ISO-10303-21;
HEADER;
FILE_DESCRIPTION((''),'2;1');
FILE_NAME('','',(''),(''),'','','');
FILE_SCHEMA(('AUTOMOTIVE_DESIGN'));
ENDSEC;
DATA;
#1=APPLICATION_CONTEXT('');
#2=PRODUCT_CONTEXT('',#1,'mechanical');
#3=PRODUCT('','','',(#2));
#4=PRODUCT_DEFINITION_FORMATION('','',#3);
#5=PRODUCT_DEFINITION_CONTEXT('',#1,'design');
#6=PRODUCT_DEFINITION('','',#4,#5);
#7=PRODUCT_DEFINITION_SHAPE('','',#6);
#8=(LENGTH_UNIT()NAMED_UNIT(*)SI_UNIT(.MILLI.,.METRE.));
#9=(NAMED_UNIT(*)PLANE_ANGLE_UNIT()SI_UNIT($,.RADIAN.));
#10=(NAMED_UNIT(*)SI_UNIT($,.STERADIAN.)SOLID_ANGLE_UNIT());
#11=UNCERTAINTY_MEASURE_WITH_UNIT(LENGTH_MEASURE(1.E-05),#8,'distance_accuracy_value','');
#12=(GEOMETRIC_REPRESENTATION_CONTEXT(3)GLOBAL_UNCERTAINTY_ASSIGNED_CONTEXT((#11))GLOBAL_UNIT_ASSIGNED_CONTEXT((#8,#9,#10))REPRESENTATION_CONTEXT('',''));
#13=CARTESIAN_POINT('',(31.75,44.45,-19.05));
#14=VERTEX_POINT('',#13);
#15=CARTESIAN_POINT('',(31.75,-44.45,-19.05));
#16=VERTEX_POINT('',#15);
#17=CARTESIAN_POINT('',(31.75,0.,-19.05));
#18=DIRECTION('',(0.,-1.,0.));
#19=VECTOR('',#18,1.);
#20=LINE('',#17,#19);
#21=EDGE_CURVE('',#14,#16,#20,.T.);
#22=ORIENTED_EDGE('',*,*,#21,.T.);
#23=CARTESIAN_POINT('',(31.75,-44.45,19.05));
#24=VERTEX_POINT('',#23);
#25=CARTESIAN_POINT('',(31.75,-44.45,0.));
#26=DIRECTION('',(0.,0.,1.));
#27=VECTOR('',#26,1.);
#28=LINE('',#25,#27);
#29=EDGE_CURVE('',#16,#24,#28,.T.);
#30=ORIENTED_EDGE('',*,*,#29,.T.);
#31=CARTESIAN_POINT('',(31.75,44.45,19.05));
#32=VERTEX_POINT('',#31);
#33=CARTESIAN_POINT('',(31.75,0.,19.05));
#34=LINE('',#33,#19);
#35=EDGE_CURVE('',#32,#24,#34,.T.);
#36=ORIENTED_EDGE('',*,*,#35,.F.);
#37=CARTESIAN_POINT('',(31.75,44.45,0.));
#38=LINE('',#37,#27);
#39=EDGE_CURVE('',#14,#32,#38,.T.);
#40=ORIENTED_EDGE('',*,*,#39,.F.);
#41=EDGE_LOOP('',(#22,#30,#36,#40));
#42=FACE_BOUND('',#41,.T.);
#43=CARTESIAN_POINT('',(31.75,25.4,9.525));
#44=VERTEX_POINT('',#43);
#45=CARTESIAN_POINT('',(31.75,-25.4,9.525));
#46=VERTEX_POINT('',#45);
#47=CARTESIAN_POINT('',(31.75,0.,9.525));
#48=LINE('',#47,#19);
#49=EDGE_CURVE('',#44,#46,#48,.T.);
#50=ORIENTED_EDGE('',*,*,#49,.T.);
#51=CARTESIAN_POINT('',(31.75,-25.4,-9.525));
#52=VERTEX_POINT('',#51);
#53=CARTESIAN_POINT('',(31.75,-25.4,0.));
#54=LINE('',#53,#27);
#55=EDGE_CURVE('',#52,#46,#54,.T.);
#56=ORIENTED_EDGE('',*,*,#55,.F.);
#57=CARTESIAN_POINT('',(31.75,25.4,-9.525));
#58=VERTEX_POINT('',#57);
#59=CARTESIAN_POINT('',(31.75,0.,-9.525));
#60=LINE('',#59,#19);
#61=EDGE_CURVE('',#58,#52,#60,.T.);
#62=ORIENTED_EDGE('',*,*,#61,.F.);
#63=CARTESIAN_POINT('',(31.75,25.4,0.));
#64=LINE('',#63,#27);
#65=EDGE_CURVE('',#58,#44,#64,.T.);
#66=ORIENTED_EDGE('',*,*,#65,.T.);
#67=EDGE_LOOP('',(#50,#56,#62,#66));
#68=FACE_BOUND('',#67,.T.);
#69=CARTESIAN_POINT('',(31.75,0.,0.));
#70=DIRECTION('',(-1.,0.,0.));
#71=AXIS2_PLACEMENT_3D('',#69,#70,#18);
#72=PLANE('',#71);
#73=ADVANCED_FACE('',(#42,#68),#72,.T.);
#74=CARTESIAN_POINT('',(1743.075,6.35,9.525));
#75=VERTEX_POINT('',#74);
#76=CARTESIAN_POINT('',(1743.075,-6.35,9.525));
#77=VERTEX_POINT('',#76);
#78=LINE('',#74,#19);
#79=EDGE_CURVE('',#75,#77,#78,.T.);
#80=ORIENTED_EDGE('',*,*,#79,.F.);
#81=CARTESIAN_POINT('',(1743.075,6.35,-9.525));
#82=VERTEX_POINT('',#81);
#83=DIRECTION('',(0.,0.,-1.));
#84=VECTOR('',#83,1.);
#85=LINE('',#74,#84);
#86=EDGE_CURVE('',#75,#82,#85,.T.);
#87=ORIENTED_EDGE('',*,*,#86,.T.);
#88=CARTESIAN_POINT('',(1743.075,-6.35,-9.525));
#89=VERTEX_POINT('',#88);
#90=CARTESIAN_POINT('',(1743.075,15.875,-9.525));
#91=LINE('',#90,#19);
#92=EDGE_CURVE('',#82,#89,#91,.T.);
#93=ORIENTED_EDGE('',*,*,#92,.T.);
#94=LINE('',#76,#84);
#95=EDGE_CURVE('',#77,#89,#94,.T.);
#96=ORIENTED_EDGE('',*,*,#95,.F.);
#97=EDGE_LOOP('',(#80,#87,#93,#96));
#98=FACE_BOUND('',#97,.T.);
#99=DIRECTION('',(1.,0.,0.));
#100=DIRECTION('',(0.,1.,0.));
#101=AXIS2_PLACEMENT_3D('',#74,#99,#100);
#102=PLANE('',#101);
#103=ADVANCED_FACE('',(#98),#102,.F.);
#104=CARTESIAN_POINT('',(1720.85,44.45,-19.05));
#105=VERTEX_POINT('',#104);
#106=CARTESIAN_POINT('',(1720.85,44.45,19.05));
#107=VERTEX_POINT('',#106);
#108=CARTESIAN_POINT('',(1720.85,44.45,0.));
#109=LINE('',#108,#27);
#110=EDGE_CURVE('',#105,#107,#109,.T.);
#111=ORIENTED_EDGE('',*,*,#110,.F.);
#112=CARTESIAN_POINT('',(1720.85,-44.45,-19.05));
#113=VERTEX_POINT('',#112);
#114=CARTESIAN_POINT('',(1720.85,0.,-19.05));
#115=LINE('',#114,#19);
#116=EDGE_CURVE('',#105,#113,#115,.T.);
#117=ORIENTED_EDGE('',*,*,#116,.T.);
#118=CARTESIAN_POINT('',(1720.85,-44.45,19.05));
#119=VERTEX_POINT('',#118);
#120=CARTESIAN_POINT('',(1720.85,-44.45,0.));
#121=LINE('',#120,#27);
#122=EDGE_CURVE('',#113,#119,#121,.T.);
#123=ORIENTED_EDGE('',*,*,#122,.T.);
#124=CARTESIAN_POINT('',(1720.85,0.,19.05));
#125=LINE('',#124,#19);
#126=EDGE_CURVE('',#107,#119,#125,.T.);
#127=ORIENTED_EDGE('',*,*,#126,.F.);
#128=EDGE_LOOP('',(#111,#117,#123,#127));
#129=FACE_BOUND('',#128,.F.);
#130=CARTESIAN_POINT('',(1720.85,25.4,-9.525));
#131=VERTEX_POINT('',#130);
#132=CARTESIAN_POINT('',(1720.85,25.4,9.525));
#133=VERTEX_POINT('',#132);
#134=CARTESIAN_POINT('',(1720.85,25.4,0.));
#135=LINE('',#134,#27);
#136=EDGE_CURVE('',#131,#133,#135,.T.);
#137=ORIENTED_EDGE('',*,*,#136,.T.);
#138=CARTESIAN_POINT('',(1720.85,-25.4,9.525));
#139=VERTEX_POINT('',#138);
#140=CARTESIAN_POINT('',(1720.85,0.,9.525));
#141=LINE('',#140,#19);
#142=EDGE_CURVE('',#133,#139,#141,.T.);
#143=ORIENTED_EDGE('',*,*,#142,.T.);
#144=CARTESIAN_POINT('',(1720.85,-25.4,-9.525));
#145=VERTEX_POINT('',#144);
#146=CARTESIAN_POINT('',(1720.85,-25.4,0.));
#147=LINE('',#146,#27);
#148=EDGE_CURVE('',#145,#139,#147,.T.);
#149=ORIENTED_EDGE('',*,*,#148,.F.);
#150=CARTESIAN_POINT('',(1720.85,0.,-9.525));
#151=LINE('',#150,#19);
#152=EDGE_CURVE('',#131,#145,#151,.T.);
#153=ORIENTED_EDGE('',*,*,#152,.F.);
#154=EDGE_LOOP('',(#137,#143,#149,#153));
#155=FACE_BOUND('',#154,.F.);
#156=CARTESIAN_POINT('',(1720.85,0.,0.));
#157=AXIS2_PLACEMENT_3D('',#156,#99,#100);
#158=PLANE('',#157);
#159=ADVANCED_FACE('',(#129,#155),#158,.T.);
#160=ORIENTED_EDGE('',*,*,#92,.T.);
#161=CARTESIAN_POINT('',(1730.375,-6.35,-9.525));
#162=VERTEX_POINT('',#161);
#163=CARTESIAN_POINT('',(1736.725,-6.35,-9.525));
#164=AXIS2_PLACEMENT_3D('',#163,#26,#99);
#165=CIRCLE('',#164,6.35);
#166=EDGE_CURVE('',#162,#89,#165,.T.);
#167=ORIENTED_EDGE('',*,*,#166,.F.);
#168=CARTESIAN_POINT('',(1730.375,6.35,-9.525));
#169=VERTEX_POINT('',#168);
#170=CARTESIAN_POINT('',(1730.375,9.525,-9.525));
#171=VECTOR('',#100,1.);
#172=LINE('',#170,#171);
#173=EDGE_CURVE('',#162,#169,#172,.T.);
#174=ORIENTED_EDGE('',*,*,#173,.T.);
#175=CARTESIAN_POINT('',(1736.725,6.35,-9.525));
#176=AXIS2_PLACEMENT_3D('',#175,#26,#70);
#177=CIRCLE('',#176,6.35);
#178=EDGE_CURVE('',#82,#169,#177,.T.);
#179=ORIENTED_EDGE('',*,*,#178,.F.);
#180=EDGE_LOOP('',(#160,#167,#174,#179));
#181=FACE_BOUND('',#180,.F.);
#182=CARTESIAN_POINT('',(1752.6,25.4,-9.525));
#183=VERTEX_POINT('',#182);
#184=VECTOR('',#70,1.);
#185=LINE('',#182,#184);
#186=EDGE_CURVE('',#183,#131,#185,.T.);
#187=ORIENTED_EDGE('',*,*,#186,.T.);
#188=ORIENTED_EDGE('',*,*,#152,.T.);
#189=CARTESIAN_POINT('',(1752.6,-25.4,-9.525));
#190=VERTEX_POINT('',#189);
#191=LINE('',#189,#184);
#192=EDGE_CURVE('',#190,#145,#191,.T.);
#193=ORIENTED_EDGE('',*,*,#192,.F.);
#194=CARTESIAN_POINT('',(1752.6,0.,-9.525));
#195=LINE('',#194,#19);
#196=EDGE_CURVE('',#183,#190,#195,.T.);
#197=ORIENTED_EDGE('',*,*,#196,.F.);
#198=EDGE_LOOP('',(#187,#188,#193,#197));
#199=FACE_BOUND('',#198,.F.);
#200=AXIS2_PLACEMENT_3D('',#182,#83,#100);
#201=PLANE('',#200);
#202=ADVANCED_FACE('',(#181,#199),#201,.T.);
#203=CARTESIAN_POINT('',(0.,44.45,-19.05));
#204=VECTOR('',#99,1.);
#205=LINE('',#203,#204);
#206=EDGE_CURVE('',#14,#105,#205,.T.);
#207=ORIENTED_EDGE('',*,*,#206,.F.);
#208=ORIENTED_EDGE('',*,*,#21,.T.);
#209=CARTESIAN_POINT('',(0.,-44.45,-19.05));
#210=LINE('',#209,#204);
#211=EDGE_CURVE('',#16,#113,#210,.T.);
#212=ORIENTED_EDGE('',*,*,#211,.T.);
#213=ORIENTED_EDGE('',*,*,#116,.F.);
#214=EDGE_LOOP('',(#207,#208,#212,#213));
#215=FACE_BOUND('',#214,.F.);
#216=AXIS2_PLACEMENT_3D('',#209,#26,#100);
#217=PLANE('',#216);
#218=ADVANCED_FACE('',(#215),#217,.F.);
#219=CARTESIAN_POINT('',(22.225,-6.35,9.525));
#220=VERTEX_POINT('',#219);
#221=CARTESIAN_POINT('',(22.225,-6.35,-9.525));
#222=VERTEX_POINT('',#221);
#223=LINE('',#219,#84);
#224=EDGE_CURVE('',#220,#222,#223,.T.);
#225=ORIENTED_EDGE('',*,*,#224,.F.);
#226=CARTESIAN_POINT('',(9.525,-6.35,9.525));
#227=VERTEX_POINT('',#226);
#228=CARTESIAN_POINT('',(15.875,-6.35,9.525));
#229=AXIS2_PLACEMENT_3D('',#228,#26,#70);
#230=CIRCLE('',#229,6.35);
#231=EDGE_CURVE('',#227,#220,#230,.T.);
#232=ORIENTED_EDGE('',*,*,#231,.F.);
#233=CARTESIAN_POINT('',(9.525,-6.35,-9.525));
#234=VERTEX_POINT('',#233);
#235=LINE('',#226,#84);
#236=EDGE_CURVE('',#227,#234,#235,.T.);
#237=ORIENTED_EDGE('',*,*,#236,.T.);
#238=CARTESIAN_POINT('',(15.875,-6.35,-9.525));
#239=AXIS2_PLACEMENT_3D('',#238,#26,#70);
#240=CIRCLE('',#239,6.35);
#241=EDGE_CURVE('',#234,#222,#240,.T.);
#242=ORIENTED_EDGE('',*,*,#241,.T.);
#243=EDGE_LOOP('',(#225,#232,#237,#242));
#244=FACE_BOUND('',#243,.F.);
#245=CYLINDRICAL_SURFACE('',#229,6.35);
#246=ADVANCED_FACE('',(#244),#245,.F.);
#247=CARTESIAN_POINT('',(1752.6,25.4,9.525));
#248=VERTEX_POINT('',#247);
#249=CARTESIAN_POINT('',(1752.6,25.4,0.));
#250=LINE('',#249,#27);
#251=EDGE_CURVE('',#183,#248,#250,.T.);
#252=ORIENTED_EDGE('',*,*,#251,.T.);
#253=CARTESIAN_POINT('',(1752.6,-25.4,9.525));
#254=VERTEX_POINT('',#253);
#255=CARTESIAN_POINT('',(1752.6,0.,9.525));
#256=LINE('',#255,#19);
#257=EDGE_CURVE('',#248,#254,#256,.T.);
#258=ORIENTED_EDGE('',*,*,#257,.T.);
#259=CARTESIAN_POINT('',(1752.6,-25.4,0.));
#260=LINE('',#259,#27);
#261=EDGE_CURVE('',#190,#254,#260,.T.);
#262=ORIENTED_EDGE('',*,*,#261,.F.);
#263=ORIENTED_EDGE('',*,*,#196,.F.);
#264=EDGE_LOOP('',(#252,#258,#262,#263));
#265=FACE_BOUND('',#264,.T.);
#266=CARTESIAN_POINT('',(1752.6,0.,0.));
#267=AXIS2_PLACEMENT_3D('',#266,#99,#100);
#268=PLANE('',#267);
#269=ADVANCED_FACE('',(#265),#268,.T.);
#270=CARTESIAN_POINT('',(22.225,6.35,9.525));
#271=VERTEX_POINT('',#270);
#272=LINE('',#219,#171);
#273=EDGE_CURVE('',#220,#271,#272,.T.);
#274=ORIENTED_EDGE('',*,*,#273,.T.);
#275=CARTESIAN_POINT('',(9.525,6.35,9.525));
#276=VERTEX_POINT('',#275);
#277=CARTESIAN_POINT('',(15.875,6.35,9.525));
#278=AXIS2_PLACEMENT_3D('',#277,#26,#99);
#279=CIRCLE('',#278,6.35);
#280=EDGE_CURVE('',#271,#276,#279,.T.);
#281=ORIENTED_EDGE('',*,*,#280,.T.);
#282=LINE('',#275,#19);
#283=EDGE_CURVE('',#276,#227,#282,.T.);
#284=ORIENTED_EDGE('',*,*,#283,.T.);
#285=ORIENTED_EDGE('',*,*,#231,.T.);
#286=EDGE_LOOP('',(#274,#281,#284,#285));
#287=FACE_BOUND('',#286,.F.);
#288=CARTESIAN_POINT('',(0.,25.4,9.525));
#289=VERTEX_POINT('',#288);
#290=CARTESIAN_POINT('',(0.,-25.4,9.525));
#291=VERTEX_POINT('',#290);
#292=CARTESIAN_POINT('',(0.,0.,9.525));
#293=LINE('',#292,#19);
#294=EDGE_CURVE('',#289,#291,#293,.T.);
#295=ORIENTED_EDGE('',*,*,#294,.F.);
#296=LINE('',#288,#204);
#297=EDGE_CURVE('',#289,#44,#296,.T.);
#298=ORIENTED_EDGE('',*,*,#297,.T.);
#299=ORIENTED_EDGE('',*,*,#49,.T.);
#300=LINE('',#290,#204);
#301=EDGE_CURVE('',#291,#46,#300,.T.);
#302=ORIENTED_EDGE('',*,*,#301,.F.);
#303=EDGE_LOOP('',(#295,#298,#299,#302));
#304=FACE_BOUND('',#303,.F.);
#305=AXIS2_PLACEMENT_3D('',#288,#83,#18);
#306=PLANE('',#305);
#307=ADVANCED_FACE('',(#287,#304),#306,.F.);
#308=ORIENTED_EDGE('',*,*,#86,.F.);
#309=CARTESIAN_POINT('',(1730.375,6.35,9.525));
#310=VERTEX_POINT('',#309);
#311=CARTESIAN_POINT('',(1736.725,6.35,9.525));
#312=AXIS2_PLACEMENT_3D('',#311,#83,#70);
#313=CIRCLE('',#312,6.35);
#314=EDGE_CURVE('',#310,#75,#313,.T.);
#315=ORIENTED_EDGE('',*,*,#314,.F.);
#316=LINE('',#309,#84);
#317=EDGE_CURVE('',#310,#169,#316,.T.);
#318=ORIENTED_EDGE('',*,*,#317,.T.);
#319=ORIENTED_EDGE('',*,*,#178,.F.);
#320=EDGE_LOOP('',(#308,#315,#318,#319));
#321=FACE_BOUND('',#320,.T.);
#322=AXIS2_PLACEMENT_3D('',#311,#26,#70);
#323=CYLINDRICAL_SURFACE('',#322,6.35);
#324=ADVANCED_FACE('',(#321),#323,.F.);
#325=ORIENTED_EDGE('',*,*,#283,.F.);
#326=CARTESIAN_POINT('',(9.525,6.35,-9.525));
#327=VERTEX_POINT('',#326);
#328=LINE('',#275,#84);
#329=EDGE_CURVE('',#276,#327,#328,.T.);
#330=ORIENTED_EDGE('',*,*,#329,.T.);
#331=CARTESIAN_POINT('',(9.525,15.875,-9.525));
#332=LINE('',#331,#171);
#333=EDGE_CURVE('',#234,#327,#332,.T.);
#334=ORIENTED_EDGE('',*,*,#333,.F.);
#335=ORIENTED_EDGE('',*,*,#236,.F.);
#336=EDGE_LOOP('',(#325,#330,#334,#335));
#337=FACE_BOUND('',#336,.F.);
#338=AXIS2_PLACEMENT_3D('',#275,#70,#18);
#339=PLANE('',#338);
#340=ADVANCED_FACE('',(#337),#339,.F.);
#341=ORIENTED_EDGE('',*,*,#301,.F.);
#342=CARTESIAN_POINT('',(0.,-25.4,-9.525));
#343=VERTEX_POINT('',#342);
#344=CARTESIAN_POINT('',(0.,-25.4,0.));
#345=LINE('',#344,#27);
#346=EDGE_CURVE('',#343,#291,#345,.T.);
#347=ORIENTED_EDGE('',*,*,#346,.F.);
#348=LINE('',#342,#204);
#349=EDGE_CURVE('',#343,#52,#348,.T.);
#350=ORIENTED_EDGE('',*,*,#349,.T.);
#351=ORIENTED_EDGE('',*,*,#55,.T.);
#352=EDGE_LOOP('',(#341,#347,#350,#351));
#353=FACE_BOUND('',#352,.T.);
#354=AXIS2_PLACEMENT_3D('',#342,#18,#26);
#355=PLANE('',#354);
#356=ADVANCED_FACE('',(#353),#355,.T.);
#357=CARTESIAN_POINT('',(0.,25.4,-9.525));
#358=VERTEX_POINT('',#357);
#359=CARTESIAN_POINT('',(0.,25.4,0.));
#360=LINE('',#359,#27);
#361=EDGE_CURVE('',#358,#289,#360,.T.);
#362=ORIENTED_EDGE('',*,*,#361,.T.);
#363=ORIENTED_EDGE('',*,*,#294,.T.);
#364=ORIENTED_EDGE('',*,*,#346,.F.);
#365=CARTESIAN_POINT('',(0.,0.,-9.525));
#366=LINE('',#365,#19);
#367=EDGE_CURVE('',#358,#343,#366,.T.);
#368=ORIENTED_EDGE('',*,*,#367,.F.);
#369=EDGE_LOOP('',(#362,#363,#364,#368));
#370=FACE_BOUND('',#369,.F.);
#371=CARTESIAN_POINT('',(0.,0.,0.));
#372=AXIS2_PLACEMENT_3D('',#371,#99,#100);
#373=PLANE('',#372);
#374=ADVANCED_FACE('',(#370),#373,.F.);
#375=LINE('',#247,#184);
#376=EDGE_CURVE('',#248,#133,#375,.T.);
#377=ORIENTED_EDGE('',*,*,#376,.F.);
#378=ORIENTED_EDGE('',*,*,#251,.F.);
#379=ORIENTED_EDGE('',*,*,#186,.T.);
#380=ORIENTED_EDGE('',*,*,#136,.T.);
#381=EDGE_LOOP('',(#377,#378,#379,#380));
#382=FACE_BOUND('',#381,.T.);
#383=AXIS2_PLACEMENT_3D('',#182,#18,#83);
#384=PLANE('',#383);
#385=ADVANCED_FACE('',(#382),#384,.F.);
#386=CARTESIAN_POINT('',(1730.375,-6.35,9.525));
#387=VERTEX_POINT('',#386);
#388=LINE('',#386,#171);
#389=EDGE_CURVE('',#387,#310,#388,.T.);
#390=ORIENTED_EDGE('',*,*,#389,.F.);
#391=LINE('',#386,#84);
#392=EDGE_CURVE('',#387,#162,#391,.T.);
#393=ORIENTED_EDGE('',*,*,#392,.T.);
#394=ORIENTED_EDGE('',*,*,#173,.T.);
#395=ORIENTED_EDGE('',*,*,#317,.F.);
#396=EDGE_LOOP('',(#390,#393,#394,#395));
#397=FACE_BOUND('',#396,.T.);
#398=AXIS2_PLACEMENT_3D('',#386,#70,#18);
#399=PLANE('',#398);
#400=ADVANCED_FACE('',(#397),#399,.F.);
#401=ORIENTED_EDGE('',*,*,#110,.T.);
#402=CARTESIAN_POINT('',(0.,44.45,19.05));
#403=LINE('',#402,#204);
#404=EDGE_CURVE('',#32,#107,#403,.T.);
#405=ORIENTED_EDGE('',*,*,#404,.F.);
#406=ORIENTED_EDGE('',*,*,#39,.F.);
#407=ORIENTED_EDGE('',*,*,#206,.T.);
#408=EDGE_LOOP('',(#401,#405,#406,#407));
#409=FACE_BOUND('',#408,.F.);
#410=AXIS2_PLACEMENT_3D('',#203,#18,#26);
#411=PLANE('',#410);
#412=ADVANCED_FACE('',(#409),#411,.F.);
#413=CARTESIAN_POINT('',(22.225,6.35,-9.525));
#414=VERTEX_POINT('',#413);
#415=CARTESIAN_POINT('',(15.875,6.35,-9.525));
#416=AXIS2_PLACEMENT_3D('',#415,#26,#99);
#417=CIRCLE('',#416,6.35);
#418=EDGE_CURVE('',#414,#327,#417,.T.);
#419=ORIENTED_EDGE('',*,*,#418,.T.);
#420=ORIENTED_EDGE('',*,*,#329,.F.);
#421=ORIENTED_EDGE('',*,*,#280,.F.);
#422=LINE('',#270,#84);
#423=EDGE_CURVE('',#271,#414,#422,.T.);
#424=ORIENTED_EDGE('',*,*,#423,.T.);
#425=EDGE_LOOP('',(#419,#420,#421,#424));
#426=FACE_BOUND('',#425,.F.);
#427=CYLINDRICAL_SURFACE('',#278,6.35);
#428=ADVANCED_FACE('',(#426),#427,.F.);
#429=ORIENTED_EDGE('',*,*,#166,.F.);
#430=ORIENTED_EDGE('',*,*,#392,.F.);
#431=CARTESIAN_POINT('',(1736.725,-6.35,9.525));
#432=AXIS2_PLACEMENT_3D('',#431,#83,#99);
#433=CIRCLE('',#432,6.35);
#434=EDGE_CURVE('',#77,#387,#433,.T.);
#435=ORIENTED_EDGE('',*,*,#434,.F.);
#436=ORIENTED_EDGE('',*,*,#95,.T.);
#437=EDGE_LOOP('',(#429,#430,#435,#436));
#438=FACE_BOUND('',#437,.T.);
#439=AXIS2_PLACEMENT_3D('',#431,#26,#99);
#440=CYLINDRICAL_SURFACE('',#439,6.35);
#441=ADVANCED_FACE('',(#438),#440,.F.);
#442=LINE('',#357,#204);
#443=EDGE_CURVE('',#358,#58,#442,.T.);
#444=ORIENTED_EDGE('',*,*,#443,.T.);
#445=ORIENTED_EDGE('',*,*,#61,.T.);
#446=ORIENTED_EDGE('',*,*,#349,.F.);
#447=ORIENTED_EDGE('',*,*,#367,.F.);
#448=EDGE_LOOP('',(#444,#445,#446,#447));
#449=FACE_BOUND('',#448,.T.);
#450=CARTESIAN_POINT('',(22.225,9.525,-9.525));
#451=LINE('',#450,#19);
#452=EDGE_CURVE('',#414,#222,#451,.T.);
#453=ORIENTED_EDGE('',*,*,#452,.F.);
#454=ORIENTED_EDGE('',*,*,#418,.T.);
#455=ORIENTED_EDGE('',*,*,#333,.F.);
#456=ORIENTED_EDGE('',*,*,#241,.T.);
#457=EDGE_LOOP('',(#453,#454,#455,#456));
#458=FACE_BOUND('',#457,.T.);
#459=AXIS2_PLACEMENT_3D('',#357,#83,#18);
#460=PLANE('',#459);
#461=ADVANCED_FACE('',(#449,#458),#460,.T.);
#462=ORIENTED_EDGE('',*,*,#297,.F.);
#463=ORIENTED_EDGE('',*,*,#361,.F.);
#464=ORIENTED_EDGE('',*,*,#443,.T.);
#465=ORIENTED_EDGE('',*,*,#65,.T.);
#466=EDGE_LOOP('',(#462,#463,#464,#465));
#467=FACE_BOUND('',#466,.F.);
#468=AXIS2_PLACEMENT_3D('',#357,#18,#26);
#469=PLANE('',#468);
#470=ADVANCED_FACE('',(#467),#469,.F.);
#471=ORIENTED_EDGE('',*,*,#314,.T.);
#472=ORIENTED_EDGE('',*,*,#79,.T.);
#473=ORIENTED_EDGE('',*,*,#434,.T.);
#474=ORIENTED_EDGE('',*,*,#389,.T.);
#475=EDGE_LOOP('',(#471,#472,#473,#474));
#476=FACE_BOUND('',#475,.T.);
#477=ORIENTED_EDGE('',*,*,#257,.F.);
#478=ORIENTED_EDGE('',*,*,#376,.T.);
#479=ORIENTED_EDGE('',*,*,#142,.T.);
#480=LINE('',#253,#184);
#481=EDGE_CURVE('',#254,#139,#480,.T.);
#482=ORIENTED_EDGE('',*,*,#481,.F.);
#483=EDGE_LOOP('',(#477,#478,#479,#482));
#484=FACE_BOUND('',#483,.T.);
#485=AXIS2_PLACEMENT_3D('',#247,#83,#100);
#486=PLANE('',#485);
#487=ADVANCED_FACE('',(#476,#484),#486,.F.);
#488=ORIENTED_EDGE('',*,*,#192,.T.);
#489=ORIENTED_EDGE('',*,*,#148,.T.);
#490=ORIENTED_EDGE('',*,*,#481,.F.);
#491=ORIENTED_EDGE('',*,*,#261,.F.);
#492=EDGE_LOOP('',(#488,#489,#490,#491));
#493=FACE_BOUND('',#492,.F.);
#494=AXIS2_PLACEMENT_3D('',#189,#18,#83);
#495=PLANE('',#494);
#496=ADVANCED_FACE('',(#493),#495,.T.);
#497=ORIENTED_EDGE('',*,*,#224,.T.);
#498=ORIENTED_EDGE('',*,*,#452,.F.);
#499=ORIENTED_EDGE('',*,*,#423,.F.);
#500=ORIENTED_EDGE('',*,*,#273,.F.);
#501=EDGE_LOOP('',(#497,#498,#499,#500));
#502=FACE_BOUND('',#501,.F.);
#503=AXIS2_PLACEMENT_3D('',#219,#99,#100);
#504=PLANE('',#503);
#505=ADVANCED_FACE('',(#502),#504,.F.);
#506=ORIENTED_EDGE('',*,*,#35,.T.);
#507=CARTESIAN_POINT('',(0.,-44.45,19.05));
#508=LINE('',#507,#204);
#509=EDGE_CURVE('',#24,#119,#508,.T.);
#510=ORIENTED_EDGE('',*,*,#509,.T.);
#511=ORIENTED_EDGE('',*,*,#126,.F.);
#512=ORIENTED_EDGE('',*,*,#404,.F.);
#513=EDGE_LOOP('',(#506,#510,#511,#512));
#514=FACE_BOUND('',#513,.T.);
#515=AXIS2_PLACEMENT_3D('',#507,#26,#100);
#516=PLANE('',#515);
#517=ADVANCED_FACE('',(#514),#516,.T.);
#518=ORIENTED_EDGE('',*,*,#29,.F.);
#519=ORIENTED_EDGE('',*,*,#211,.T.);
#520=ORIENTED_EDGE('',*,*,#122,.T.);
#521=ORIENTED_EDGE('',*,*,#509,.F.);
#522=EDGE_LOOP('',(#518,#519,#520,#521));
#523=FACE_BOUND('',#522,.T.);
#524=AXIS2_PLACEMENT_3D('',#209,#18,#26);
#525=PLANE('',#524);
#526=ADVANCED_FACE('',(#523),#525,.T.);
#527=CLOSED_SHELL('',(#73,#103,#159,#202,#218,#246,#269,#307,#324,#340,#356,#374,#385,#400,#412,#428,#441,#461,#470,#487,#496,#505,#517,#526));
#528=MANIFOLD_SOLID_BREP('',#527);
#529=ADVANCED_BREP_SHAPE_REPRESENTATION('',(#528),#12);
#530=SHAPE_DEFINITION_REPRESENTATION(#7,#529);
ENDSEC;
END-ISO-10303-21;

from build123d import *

# Parameters (mm, degrees)
F0_W     = 88.9
F0_H     = 38.1
F1_DEPTH = 1752.6
F3_W     = 88.9
F3_H     = 38.1
F3_W_2   = 50.8
F3_H_2   = 19.05
F4_DEPTH = 31.75
F6_DEPTH = 28.576


# Not quite as in the source:
# - a pattern or mirror of a feature is missing from the dataset's text; its kind, count and spacing are read off the source's solid


with BuildPart() as f1:
    # F0 (on Right) → F1 (new body)
    with BuildSketch(Plane.YZ):
        Rectangle(F0_W, F0_H)
    extrude(amount=F1_DEPTH)

    # F3 (on face) → F4 (cut)
    with BuildSketch(Plane(origin=(0, 0, 0), x_dir=(0, -1, 0), z_dir=(-1, 0, 0))):
        Rectangle(F3_W, F3_H)
        Rectangle(F3_W_2, F3_H_2, mode=Mode.SUBTRACT)
    f4 = extrude(amount=-F4_DEPTH, mode=Mode.SUBTRACT)

    # F4_copies: F4 across plane
    add(f4.mirror(Plane(origin=(876.3, 0, 0), x_dir=(0, 0, 1), z_dir=(1, 0, 0))), mode=Mode.SUBTRACT)

    # F5 (on face) → F6 (cut, through all)
    with BuildSketch(Plane.XY.offset(9.525)):
        with BuildLine():
            Line((9.525, 6.35), (9.525, -6.35))
            ThreePointArc((9.525, -6.35), (15.875, -12.7), (22.225, -6.35))
            Line((22.225, -6.35), (22.225, 6.35))
            ThreePointArc((22.225, 6.35), (15.875, 12.7), (9.525, 6.35))
        make_face()
    f6 = extrude(amount=-F6_DEPTH, mode=Mode.SUBTRACT)

    # F6_copies: F6 across plane
    add(f6.mirror(Plane(origin=(876.3, 0, 0), x_dir=(0, 0, 1), z_dir=(1, 0, 0))), mode=Mode.SUBTRACT)


solid = f1.part
